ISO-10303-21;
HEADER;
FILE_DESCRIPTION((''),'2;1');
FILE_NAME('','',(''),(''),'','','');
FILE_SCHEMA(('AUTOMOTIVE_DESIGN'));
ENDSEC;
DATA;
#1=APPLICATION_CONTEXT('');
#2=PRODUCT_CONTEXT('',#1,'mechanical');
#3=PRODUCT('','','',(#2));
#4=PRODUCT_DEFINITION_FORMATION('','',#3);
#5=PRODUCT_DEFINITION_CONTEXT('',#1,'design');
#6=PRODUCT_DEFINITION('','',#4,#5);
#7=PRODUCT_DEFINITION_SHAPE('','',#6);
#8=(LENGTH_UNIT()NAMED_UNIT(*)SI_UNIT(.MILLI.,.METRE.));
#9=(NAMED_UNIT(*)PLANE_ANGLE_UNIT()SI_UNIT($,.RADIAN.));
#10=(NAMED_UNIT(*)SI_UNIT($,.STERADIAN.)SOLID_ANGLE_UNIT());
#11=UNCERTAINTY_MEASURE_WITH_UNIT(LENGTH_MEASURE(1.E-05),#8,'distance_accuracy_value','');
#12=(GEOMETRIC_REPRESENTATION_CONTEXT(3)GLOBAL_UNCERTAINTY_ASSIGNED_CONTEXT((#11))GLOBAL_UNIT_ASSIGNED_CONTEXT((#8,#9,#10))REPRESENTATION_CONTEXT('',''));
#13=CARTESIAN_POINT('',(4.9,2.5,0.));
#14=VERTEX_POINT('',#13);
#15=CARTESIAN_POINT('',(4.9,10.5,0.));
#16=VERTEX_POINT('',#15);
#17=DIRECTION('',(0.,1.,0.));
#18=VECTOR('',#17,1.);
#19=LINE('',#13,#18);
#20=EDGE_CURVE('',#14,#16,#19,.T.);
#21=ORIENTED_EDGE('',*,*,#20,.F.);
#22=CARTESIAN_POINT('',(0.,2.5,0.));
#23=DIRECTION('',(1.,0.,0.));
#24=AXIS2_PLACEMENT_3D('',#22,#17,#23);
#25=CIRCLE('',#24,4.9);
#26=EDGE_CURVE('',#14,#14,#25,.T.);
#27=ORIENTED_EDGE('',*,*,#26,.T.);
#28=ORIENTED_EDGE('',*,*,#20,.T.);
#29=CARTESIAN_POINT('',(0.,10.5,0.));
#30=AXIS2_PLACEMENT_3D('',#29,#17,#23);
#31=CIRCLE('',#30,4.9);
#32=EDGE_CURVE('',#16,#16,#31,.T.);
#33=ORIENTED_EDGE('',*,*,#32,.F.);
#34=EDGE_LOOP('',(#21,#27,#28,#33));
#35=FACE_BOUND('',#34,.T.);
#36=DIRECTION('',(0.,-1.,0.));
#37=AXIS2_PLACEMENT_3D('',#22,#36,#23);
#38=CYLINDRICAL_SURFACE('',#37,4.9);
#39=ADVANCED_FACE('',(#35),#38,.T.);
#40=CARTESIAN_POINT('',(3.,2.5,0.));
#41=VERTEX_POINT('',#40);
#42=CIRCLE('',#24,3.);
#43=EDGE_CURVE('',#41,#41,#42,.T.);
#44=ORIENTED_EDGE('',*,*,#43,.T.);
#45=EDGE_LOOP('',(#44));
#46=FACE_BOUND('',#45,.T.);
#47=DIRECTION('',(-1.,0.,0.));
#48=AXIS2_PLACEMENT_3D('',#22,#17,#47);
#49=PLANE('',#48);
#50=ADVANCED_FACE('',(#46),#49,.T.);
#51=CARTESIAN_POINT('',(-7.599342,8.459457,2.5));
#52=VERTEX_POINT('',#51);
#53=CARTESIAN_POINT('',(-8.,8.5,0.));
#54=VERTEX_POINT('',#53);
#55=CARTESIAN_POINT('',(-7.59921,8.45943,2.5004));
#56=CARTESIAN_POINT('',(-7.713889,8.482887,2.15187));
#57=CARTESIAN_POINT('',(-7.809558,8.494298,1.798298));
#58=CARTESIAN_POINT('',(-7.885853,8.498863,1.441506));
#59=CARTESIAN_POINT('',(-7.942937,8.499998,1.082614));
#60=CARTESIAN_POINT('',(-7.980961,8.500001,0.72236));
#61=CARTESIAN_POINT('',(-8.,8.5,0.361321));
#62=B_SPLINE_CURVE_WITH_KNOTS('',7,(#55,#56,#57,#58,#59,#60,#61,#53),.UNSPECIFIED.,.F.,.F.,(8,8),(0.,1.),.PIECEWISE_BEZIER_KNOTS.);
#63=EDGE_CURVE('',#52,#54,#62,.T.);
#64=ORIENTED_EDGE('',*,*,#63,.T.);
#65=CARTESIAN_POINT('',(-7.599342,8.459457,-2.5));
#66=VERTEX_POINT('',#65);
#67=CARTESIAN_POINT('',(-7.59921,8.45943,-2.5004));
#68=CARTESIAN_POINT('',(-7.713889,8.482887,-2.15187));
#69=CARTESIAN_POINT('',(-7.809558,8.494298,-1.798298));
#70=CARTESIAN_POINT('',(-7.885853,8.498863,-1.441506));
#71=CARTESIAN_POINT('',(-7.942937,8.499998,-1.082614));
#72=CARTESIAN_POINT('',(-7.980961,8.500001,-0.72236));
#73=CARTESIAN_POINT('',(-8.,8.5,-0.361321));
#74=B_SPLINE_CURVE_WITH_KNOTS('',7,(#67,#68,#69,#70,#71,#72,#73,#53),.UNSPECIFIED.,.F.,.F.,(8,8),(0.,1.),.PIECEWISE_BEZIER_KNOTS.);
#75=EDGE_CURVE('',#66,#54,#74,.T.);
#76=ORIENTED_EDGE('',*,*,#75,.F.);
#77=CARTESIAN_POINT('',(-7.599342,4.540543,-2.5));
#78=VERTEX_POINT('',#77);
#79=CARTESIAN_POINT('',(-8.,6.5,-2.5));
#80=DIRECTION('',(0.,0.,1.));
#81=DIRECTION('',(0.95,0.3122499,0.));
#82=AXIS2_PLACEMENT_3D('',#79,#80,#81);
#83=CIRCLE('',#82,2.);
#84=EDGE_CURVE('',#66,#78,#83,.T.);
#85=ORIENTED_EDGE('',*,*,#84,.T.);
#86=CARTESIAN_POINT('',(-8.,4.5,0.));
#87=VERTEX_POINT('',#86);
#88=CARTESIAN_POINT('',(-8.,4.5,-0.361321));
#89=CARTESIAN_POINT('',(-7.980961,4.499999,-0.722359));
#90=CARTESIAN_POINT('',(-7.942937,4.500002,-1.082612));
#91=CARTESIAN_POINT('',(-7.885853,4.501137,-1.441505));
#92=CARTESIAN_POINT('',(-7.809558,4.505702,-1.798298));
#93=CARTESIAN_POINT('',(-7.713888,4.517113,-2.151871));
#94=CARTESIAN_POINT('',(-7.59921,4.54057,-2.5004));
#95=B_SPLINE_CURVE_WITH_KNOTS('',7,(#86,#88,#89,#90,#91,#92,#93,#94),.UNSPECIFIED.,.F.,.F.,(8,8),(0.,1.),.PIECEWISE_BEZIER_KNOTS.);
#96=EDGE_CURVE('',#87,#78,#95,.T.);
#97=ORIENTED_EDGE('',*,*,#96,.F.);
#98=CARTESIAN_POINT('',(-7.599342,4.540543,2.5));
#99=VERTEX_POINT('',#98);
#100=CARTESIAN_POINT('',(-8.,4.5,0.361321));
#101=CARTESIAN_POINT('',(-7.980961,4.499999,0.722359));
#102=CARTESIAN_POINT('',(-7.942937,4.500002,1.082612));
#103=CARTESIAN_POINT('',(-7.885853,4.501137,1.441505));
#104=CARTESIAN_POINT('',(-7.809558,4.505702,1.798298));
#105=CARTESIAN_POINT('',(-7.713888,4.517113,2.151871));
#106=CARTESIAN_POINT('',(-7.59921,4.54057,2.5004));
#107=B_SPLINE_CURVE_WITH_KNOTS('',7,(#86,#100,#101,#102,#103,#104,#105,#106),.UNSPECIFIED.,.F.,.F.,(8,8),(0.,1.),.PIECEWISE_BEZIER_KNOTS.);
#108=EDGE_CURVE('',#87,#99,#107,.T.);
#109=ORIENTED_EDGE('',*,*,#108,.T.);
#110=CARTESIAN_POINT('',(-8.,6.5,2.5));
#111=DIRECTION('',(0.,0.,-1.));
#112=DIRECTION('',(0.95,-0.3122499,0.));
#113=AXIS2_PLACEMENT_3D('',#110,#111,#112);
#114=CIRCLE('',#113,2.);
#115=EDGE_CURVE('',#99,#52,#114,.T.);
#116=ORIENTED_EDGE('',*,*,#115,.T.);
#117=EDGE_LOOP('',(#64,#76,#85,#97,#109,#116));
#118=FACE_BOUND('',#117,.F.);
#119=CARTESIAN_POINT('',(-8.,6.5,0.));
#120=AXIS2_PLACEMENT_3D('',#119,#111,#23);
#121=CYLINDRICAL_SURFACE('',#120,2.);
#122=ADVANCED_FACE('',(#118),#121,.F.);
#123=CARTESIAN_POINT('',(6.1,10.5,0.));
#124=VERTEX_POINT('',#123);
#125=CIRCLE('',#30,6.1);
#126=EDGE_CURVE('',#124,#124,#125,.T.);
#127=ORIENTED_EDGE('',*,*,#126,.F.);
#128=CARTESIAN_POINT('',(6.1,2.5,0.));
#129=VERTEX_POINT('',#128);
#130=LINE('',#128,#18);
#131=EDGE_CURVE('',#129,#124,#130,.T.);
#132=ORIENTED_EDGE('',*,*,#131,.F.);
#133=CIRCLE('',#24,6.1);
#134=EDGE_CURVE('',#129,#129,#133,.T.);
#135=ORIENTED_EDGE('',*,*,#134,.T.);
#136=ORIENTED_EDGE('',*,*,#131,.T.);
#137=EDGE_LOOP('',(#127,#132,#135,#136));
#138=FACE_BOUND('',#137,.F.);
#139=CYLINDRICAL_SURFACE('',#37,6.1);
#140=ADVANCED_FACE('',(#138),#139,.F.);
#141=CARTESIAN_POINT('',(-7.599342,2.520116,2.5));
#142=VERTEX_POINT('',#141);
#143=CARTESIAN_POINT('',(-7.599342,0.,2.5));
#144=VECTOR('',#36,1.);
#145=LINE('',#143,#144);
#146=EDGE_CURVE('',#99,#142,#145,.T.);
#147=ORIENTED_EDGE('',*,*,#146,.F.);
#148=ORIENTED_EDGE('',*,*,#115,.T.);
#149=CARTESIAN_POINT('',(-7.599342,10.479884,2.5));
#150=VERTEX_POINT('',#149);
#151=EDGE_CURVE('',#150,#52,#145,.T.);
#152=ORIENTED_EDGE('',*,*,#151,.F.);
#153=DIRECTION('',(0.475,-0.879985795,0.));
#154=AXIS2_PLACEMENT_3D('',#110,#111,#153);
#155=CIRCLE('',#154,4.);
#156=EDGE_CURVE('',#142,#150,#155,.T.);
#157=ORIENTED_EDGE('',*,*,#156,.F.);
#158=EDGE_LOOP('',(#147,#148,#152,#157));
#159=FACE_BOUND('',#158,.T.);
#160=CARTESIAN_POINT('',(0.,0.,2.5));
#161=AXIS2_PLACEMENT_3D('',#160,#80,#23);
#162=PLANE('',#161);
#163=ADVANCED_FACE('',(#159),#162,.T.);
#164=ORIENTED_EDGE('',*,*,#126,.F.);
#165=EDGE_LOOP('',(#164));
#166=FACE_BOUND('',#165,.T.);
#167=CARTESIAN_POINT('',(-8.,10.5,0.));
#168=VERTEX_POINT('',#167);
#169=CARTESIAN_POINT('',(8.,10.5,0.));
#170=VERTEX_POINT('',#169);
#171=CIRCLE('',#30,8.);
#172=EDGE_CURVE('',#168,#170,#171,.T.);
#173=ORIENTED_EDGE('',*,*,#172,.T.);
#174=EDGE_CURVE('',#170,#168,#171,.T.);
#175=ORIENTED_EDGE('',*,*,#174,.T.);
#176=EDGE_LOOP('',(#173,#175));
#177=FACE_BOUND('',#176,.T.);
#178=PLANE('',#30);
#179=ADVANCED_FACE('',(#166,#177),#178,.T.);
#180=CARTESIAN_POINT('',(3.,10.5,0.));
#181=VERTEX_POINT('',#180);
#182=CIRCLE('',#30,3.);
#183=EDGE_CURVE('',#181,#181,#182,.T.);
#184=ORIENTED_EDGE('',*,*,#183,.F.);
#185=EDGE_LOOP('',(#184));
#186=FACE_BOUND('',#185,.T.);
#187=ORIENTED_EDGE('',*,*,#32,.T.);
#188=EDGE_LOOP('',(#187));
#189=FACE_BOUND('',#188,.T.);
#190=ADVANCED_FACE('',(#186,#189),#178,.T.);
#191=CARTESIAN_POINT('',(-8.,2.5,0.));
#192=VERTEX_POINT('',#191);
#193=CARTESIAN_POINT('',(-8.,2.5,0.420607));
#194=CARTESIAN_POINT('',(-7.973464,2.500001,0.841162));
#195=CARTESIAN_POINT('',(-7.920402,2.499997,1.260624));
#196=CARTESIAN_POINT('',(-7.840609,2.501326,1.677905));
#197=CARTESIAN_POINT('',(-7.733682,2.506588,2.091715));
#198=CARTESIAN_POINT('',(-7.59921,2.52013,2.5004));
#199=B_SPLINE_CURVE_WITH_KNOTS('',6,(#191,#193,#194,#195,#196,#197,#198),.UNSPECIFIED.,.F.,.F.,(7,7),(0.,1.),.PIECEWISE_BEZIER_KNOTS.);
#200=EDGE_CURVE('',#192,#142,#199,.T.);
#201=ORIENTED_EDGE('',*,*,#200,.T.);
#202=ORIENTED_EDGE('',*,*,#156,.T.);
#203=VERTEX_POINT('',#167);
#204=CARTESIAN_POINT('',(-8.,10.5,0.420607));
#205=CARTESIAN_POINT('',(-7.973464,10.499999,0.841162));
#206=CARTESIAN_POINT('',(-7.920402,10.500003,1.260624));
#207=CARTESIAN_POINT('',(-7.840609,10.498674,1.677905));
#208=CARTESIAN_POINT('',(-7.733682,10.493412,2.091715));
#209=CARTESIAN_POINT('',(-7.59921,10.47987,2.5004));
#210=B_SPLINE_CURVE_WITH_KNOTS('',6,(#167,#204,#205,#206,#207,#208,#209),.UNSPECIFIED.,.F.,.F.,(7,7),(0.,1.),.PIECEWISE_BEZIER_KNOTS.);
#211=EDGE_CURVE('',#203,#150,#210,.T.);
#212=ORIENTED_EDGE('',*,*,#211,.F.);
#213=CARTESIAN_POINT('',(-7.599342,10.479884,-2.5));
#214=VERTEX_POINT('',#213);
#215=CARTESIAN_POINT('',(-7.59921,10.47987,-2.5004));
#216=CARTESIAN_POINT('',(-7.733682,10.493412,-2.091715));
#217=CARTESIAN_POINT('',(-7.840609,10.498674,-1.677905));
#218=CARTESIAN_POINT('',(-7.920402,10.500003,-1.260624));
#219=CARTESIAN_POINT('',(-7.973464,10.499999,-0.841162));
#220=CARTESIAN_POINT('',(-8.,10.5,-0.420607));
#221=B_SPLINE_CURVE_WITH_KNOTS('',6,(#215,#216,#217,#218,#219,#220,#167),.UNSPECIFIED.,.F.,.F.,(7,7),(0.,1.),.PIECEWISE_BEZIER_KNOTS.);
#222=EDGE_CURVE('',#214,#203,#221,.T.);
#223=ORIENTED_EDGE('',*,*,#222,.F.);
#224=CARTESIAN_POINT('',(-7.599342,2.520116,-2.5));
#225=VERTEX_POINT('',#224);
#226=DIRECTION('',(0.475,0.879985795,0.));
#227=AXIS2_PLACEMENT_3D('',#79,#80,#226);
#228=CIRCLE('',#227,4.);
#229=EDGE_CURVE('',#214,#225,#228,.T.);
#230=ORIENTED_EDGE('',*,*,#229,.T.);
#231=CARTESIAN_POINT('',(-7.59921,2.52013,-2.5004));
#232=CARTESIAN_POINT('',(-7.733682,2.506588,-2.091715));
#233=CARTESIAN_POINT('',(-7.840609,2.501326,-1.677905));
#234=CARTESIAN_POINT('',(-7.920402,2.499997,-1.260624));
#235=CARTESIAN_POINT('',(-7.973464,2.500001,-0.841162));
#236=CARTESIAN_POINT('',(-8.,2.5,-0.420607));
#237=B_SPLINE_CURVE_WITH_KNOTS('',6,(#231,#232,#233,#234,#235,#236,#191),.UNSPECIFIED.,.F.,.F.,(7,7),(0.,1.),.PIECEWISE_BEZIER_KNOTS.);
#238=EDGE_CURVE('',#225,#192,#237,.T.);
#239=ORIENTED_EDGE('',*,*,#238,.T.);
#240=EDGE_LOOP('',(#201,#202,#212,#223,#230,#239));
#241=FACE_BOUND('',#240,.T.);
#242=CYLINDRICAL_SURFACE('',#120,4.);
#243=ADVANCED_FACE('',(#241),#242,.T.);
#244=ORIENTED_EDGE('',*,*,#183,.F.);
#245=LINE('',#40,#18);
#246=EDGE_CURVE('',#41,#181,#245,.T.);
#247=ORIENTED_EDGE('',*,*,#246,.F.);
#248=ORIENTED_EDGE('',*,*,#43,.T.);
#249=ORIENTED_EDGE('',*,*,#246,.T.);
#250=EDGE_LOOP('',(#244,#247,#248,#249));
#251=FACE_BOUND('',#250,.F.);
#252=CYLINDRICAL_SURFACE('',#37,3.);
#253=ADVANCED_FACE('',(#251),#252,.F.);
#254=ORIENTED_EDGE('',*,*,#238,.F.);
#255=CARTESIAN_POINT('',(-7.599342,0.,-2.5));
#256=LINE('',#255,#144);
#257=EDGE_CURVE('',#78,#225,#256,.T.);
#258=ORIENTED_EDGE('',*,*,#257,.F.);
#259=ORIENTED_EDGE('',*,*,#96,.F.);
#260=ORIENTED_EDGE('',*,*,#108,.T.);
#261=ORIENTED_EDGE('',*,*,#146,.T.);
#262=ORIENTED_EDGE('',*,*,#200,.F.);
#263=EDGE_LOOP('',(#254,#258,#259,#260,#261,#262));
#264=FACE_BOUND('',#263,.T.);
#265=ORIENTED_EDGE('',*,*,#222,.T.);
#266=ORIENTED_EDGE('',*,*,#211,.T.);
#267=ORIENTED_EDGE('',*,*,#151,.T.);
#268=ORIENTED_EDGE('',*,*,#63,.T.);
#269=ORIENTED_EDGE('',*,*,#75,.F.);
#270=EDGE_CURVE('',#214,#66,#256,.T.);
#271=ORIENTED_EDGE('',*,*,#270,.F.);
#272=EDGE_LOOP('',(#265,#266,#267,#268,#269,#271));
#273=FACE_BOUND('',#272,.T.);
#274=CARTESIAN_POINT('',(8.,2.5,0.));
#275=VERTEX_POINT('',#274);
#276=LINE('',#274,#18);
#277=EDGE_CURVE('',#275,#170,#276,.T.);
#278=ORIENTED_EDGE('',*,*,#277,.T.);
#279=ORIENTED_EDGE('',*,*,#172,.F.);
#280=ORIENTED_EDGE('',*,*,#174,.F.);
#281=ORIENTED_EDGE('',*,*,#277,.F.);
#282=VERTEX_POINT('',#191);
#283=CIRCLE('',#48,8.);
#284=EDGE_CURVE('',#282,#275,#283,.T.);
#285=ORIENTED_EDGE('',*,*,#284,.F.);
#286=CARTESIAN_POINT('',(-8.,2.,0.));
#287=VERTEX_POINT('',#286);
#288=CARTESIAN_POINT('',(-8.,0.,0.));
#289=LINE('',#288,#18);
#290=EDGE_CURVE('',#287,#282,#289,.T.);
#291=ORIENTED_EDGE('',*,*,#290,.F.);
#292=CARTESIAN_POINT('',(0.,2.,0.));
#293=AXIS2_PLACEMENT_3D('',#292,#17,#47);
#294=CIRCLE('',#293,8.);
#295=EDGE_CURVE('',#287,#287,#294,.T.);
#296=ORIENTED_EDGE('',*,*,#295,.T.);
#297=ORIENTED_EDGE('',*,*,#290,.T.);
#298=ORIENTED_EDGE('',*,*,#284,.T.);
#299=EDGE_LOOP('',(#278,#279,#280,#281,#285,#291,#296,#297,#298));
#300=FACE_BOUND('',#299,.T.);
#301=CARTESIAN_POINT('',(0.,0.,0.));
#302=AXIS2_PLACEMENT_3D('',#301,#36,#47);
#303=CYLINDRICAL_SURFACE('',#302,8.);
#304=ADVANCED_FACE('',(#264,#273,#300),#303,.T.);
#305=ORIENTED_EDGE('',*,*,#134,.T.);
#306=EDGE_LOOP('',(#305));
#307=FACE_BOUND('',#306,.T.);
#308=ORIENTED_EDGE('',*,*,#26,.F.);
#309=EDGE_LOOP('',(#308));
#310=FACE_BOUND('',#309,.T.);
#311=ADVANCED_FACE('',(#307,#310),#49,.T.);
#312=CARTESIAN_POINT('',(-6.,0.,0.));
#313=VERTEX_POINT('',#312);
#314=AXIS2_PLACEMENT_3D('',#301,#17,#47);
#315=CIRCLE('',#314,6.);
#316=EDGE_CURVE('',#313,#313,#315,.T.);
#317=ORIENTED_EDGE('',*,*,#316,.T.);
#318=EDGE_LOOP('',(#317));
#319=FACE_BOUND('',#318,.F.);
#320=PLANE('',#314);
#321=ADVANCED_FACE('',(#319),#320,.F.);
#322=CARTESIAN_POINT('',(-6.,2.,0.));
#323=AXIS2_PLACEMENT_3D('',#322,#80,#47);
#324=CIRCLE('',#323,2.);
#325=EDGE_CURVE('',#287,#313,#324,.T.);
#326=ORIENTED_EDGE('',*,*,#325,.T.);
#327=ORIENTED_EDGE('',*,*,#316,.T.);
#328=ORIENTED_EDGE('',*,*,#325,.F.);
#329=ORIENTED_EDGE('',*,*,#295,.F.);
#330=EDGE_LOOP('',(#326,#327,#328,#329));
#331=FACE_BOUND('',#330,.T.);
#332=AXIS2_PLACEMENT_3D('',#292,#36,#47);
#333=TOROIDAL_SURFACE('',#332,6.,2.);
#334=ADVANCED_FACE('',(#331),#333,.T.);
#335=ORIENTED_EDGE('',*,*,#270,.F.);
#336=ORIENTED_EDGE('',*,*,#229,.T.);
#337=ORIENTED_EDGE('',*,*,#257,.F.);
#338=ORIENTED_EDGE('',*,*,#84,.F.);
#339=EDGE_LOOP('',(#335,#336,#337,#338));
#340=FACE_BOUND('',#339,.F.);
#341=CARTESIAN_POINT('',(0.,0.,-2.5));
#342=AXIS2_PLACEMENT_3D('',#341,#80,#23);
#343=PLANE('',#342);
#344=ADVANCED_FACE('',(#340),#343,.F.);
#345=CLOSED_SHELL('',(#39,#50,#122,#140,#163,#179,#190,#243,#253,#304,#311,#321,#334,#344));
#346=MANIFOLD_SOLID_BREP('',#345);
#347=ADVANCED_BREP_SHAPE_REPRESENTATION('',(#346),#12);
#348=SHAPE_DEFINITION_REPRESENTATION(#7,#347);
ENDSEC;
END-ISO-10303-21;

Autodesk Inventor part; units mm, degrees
ref_plane "YZ Plane" through (0, 0, 0) normal (1, 0, 0) x (0, 1, 0)
ref_plane "XZ Plane" through (0, 0, 0) normal (0, 1, 0) x (-1, 0, 0)
ref_plane "XY Plane" through (0, 0, 0) normal (0, 0, 1) x (1, 0, 0)
sketch "Sketch1" plane through (0, 0, 0) normal (0, 1, 0) x (-1, 0, 0)
  circle A0 centre (0, 0) radius 8
  dimension "d0" = 16
extrude "Extrusion1" add sketch "Sketch1" along normal blind 2.5
sketch "Sketch2" plane through (0, 2.5, 0) normal (0, 1, 0) x (1, 0, 0)
  circle A0 centre (0, 0) radius 4.9
  circle A1 centre (0, 0) radius 6.1
  circle A2 centre (0, 0) radius 8 projected
  circle A3 centre (0, 0) radius 3
  dimension "d3" = 9.8
  dimension "d4" = 12.2
  dimension "d8" = 6
extrude "Extrusion2" add sketch "Sketch2" along normal blind 8
fillet "Fillet1" radius 2 1 edges at (8, 0, 0)
sketch "Sketch3" plane through (0, 0, 0) normal (0, 0, 1) x (1, 0, 0)
  line L0 (-6.1, 10.5) -> (6.1, 10.5) projected
  line L1 (6.1, 2.5) -> (-6.1, 2.5) projected
  line L2 (6.1, 2.5) -> (-6.1, 2.5) projected
  line L3 (-8, 2) -> (-8, 10.5) projected
  circle A0 centre (-8, 6.5) radius 2
  circle A1 centre (-8, 6.5) radius 4
  line L4 (8, 10.5) -> (-8, 10.5) projected
  line L5 (-6.1, 10.5) -> (-6.1, 2.5) projected
  point P0 (0, 0)
  point P1 (-6.1, 7.1245)
  point P2 (-6.1, 10.0199)
  point P3 (-6.1, 2.9801)
  point P4 (-6.1, 5.8755)
  dimension "d14" = 4
  dimension "d15" = 2
  dimension "d16" = 4
extrude "Extrusion3" add sketch "Sketch3" along normal mid plane 5 contours A1 L3 A0 | L3 A0 L5 A1 | A1 L5 A0 L3
properties part number "Landing_leg_clamp_large_shoe"
